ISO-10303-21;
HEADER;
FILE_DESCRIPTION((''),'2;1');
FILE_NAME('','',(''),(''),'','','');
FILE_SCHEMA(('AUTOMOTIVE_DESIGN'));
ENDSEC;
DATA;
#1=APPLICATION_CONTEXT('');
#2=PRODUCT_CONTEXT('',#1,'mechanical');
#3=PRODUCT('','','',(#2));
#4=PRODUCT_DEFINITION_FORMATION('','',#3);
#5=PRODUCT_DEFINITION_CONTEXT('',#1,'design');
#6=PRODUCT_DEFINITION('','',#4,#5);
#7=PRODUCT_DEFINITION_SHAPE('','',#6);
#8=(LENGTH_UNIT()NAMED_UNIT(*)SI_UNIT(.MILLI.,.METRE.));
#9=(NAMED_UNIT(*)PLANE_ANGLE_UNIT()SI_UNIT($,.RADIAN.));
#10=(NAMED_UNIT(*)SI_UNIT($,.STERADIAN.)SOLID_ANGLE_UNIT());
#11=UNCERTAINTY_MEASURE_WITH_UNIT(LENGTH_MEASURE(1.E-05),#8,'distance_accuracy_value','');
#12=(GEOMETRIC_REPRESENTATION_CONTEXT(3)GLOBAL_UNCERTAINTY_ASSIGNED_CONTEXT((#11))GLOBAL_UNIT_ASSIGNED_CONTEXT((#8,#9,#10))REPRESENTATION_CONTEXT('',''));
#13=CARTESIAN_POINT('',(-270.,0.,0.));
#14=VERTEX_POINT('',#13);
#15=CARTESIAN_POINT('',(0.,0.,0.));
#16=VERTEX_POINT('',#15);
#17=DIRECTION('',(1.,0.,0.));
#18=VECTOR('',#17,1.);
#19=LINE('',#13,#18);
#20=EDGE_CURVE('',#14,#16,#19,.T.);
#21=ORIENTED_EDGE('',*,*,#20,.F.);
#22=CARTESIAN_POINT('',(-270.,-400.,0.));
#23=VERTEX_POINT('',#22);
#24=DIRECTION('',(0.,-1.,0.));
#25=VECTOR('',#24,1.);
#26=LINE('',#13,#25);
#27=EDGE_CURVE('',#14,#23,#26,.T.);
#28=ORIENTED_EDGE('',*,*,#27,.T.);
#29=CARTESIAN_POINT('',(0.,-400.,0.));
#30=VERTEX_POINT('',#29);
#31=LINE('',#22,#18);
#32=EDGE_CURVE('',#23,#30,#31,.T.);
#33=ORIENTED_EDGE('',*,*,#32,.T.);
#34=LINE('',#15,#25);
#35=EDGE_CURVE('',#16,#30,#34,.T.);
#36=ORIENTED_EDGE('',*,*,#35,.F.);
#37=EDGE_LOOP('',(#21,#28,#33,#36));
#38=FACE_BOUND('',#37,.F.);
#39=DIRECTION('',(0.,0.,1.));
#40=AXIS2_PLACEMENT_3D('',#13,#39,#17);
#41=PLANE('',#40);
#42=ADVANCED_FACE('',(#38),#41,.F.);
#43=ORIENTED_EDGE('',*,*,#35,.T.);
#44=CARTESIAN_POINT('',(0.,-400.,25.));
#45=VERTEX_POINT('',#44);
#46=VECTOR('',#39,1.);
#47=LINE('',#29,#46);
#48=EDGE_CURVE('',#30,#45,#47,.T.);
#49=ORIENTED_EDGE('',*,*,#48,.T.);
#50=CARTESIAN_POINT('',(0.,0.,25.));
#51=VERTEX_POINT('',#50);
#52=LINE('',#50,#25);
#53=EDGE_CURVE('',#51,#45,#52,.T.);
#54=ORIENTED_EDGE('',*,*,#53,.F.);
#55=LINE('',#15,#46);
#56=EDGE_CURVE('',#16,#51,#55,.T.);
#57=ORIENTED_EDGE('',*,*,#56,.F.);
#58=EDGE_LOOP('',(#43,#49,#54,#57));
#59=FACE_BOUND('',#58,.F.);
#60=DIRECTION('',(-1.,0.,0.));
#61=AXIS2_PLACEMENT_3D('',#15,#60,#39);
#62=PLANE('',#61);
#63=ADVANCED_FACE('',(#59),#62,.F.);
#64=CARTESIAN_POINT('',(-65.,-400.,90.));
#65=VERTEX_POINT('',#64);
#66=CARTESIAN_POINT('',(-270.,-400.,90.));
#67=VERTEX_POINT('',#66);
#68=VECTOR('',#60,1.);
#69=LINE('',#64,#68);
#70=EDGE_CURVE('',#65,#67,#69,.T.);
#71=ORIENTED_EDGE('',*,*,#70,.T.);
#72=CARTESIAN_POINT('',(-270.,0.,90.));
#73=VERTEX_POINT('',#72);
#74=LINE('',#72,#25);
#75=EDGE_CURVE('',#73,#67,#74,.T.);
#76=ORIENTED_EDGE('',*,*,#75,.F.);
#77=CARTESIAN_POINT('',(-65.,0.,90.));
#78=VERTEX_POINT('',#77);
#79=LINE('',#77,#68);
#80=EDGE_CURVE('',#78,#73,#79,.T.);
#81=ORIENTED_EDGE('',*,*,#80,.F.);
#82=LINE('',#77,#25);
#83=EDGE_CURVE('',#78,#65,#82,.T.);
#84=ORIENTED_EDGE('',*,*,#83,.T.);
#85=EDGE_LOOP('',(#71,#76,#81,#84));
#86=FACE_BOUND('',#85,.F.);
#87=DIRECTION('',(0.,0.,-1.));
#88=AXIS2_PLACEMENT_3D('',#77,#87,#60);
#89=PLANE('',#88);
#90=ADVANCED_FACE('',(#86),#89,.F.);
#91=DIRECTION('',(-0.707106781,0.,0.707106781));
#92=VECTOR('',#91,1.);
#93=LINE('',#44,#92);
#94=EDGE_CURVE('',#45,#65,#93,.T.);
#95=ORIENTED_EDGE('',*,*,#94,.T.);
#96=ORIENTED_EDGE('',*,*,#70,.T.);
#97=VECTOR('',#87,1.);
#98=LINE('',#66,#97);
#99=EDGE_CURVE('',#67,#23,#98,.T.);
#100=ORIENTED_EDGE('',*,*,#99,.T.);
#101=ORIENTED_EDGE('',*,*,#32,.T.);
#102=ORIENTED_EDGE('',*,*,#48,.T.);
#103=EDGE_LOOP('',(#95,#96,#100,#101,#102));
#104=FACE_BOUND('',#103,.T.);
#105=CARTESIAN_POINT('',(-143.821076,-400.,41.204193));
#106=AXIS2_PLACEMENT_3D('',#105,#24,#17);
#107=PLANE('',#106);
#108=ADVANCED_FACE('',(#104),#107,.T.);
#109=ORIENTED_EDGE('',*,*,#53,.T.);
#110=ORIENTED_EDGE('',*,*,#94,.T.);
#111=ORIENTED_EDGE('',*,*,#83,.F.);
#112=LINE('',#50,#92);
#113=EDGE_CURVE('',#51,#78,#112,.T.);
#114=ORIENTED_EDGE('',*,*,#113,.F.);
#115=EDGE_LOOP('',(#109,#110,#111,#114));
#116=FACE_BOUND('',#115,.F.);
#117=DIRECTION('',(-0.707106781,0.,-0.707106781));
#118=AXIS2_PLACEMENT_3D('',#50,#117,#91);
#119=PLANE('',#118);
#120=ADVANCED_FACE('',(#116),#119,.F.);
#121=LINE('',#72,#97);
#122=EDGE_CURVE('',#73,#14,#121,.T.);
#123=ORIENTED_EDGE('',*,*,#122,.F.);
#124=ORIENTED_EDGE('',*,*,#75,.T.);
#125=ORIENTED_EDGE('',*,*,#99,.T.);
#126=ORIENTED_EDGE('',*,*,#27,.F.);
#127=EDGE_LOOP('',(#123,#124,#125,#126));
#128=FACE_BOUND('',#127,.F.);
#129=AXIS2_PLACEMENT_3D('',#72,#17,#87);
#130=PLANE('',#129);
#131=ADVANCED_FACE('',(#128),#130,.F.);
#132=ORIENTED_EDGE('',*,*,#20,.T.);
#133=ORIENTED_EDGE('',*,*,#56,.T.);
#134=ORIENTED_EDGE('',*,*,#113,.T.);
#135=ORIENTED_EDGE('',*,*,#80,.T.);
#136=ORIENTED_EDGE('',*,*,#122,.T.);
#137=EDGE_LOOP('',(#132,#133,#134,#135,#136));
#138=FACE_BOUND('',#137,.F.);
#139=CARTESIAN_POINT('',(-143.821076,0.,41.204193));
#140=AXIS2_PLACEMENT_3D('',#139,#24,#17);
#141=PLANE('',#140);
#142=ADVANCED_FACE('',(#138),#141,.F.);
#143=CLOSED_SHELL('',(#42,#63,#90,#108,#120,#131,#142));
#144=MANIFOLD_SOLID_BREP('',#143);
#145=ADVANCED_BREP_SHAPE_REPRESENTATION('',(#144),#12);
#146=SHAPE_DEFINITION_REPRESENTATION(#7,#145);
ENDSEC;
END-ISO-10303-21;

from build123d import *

# Parameters (mm, degrees)
F1_DEPTH = 400


# Not quite as in the source:
# - a feature names something its author has since deleted; it is built from what else it names


with BuildPart() as f1:
    # F0 (on Front) → F1 (new body)
    with BuildSketch(Plane.XZ):
        Polygon((-270, 0), (0, 0), (0, 25), (-65, 90), (-270, 90), align=None)
    extrude(amount=F1_DEPTH)


solid = f1.part
